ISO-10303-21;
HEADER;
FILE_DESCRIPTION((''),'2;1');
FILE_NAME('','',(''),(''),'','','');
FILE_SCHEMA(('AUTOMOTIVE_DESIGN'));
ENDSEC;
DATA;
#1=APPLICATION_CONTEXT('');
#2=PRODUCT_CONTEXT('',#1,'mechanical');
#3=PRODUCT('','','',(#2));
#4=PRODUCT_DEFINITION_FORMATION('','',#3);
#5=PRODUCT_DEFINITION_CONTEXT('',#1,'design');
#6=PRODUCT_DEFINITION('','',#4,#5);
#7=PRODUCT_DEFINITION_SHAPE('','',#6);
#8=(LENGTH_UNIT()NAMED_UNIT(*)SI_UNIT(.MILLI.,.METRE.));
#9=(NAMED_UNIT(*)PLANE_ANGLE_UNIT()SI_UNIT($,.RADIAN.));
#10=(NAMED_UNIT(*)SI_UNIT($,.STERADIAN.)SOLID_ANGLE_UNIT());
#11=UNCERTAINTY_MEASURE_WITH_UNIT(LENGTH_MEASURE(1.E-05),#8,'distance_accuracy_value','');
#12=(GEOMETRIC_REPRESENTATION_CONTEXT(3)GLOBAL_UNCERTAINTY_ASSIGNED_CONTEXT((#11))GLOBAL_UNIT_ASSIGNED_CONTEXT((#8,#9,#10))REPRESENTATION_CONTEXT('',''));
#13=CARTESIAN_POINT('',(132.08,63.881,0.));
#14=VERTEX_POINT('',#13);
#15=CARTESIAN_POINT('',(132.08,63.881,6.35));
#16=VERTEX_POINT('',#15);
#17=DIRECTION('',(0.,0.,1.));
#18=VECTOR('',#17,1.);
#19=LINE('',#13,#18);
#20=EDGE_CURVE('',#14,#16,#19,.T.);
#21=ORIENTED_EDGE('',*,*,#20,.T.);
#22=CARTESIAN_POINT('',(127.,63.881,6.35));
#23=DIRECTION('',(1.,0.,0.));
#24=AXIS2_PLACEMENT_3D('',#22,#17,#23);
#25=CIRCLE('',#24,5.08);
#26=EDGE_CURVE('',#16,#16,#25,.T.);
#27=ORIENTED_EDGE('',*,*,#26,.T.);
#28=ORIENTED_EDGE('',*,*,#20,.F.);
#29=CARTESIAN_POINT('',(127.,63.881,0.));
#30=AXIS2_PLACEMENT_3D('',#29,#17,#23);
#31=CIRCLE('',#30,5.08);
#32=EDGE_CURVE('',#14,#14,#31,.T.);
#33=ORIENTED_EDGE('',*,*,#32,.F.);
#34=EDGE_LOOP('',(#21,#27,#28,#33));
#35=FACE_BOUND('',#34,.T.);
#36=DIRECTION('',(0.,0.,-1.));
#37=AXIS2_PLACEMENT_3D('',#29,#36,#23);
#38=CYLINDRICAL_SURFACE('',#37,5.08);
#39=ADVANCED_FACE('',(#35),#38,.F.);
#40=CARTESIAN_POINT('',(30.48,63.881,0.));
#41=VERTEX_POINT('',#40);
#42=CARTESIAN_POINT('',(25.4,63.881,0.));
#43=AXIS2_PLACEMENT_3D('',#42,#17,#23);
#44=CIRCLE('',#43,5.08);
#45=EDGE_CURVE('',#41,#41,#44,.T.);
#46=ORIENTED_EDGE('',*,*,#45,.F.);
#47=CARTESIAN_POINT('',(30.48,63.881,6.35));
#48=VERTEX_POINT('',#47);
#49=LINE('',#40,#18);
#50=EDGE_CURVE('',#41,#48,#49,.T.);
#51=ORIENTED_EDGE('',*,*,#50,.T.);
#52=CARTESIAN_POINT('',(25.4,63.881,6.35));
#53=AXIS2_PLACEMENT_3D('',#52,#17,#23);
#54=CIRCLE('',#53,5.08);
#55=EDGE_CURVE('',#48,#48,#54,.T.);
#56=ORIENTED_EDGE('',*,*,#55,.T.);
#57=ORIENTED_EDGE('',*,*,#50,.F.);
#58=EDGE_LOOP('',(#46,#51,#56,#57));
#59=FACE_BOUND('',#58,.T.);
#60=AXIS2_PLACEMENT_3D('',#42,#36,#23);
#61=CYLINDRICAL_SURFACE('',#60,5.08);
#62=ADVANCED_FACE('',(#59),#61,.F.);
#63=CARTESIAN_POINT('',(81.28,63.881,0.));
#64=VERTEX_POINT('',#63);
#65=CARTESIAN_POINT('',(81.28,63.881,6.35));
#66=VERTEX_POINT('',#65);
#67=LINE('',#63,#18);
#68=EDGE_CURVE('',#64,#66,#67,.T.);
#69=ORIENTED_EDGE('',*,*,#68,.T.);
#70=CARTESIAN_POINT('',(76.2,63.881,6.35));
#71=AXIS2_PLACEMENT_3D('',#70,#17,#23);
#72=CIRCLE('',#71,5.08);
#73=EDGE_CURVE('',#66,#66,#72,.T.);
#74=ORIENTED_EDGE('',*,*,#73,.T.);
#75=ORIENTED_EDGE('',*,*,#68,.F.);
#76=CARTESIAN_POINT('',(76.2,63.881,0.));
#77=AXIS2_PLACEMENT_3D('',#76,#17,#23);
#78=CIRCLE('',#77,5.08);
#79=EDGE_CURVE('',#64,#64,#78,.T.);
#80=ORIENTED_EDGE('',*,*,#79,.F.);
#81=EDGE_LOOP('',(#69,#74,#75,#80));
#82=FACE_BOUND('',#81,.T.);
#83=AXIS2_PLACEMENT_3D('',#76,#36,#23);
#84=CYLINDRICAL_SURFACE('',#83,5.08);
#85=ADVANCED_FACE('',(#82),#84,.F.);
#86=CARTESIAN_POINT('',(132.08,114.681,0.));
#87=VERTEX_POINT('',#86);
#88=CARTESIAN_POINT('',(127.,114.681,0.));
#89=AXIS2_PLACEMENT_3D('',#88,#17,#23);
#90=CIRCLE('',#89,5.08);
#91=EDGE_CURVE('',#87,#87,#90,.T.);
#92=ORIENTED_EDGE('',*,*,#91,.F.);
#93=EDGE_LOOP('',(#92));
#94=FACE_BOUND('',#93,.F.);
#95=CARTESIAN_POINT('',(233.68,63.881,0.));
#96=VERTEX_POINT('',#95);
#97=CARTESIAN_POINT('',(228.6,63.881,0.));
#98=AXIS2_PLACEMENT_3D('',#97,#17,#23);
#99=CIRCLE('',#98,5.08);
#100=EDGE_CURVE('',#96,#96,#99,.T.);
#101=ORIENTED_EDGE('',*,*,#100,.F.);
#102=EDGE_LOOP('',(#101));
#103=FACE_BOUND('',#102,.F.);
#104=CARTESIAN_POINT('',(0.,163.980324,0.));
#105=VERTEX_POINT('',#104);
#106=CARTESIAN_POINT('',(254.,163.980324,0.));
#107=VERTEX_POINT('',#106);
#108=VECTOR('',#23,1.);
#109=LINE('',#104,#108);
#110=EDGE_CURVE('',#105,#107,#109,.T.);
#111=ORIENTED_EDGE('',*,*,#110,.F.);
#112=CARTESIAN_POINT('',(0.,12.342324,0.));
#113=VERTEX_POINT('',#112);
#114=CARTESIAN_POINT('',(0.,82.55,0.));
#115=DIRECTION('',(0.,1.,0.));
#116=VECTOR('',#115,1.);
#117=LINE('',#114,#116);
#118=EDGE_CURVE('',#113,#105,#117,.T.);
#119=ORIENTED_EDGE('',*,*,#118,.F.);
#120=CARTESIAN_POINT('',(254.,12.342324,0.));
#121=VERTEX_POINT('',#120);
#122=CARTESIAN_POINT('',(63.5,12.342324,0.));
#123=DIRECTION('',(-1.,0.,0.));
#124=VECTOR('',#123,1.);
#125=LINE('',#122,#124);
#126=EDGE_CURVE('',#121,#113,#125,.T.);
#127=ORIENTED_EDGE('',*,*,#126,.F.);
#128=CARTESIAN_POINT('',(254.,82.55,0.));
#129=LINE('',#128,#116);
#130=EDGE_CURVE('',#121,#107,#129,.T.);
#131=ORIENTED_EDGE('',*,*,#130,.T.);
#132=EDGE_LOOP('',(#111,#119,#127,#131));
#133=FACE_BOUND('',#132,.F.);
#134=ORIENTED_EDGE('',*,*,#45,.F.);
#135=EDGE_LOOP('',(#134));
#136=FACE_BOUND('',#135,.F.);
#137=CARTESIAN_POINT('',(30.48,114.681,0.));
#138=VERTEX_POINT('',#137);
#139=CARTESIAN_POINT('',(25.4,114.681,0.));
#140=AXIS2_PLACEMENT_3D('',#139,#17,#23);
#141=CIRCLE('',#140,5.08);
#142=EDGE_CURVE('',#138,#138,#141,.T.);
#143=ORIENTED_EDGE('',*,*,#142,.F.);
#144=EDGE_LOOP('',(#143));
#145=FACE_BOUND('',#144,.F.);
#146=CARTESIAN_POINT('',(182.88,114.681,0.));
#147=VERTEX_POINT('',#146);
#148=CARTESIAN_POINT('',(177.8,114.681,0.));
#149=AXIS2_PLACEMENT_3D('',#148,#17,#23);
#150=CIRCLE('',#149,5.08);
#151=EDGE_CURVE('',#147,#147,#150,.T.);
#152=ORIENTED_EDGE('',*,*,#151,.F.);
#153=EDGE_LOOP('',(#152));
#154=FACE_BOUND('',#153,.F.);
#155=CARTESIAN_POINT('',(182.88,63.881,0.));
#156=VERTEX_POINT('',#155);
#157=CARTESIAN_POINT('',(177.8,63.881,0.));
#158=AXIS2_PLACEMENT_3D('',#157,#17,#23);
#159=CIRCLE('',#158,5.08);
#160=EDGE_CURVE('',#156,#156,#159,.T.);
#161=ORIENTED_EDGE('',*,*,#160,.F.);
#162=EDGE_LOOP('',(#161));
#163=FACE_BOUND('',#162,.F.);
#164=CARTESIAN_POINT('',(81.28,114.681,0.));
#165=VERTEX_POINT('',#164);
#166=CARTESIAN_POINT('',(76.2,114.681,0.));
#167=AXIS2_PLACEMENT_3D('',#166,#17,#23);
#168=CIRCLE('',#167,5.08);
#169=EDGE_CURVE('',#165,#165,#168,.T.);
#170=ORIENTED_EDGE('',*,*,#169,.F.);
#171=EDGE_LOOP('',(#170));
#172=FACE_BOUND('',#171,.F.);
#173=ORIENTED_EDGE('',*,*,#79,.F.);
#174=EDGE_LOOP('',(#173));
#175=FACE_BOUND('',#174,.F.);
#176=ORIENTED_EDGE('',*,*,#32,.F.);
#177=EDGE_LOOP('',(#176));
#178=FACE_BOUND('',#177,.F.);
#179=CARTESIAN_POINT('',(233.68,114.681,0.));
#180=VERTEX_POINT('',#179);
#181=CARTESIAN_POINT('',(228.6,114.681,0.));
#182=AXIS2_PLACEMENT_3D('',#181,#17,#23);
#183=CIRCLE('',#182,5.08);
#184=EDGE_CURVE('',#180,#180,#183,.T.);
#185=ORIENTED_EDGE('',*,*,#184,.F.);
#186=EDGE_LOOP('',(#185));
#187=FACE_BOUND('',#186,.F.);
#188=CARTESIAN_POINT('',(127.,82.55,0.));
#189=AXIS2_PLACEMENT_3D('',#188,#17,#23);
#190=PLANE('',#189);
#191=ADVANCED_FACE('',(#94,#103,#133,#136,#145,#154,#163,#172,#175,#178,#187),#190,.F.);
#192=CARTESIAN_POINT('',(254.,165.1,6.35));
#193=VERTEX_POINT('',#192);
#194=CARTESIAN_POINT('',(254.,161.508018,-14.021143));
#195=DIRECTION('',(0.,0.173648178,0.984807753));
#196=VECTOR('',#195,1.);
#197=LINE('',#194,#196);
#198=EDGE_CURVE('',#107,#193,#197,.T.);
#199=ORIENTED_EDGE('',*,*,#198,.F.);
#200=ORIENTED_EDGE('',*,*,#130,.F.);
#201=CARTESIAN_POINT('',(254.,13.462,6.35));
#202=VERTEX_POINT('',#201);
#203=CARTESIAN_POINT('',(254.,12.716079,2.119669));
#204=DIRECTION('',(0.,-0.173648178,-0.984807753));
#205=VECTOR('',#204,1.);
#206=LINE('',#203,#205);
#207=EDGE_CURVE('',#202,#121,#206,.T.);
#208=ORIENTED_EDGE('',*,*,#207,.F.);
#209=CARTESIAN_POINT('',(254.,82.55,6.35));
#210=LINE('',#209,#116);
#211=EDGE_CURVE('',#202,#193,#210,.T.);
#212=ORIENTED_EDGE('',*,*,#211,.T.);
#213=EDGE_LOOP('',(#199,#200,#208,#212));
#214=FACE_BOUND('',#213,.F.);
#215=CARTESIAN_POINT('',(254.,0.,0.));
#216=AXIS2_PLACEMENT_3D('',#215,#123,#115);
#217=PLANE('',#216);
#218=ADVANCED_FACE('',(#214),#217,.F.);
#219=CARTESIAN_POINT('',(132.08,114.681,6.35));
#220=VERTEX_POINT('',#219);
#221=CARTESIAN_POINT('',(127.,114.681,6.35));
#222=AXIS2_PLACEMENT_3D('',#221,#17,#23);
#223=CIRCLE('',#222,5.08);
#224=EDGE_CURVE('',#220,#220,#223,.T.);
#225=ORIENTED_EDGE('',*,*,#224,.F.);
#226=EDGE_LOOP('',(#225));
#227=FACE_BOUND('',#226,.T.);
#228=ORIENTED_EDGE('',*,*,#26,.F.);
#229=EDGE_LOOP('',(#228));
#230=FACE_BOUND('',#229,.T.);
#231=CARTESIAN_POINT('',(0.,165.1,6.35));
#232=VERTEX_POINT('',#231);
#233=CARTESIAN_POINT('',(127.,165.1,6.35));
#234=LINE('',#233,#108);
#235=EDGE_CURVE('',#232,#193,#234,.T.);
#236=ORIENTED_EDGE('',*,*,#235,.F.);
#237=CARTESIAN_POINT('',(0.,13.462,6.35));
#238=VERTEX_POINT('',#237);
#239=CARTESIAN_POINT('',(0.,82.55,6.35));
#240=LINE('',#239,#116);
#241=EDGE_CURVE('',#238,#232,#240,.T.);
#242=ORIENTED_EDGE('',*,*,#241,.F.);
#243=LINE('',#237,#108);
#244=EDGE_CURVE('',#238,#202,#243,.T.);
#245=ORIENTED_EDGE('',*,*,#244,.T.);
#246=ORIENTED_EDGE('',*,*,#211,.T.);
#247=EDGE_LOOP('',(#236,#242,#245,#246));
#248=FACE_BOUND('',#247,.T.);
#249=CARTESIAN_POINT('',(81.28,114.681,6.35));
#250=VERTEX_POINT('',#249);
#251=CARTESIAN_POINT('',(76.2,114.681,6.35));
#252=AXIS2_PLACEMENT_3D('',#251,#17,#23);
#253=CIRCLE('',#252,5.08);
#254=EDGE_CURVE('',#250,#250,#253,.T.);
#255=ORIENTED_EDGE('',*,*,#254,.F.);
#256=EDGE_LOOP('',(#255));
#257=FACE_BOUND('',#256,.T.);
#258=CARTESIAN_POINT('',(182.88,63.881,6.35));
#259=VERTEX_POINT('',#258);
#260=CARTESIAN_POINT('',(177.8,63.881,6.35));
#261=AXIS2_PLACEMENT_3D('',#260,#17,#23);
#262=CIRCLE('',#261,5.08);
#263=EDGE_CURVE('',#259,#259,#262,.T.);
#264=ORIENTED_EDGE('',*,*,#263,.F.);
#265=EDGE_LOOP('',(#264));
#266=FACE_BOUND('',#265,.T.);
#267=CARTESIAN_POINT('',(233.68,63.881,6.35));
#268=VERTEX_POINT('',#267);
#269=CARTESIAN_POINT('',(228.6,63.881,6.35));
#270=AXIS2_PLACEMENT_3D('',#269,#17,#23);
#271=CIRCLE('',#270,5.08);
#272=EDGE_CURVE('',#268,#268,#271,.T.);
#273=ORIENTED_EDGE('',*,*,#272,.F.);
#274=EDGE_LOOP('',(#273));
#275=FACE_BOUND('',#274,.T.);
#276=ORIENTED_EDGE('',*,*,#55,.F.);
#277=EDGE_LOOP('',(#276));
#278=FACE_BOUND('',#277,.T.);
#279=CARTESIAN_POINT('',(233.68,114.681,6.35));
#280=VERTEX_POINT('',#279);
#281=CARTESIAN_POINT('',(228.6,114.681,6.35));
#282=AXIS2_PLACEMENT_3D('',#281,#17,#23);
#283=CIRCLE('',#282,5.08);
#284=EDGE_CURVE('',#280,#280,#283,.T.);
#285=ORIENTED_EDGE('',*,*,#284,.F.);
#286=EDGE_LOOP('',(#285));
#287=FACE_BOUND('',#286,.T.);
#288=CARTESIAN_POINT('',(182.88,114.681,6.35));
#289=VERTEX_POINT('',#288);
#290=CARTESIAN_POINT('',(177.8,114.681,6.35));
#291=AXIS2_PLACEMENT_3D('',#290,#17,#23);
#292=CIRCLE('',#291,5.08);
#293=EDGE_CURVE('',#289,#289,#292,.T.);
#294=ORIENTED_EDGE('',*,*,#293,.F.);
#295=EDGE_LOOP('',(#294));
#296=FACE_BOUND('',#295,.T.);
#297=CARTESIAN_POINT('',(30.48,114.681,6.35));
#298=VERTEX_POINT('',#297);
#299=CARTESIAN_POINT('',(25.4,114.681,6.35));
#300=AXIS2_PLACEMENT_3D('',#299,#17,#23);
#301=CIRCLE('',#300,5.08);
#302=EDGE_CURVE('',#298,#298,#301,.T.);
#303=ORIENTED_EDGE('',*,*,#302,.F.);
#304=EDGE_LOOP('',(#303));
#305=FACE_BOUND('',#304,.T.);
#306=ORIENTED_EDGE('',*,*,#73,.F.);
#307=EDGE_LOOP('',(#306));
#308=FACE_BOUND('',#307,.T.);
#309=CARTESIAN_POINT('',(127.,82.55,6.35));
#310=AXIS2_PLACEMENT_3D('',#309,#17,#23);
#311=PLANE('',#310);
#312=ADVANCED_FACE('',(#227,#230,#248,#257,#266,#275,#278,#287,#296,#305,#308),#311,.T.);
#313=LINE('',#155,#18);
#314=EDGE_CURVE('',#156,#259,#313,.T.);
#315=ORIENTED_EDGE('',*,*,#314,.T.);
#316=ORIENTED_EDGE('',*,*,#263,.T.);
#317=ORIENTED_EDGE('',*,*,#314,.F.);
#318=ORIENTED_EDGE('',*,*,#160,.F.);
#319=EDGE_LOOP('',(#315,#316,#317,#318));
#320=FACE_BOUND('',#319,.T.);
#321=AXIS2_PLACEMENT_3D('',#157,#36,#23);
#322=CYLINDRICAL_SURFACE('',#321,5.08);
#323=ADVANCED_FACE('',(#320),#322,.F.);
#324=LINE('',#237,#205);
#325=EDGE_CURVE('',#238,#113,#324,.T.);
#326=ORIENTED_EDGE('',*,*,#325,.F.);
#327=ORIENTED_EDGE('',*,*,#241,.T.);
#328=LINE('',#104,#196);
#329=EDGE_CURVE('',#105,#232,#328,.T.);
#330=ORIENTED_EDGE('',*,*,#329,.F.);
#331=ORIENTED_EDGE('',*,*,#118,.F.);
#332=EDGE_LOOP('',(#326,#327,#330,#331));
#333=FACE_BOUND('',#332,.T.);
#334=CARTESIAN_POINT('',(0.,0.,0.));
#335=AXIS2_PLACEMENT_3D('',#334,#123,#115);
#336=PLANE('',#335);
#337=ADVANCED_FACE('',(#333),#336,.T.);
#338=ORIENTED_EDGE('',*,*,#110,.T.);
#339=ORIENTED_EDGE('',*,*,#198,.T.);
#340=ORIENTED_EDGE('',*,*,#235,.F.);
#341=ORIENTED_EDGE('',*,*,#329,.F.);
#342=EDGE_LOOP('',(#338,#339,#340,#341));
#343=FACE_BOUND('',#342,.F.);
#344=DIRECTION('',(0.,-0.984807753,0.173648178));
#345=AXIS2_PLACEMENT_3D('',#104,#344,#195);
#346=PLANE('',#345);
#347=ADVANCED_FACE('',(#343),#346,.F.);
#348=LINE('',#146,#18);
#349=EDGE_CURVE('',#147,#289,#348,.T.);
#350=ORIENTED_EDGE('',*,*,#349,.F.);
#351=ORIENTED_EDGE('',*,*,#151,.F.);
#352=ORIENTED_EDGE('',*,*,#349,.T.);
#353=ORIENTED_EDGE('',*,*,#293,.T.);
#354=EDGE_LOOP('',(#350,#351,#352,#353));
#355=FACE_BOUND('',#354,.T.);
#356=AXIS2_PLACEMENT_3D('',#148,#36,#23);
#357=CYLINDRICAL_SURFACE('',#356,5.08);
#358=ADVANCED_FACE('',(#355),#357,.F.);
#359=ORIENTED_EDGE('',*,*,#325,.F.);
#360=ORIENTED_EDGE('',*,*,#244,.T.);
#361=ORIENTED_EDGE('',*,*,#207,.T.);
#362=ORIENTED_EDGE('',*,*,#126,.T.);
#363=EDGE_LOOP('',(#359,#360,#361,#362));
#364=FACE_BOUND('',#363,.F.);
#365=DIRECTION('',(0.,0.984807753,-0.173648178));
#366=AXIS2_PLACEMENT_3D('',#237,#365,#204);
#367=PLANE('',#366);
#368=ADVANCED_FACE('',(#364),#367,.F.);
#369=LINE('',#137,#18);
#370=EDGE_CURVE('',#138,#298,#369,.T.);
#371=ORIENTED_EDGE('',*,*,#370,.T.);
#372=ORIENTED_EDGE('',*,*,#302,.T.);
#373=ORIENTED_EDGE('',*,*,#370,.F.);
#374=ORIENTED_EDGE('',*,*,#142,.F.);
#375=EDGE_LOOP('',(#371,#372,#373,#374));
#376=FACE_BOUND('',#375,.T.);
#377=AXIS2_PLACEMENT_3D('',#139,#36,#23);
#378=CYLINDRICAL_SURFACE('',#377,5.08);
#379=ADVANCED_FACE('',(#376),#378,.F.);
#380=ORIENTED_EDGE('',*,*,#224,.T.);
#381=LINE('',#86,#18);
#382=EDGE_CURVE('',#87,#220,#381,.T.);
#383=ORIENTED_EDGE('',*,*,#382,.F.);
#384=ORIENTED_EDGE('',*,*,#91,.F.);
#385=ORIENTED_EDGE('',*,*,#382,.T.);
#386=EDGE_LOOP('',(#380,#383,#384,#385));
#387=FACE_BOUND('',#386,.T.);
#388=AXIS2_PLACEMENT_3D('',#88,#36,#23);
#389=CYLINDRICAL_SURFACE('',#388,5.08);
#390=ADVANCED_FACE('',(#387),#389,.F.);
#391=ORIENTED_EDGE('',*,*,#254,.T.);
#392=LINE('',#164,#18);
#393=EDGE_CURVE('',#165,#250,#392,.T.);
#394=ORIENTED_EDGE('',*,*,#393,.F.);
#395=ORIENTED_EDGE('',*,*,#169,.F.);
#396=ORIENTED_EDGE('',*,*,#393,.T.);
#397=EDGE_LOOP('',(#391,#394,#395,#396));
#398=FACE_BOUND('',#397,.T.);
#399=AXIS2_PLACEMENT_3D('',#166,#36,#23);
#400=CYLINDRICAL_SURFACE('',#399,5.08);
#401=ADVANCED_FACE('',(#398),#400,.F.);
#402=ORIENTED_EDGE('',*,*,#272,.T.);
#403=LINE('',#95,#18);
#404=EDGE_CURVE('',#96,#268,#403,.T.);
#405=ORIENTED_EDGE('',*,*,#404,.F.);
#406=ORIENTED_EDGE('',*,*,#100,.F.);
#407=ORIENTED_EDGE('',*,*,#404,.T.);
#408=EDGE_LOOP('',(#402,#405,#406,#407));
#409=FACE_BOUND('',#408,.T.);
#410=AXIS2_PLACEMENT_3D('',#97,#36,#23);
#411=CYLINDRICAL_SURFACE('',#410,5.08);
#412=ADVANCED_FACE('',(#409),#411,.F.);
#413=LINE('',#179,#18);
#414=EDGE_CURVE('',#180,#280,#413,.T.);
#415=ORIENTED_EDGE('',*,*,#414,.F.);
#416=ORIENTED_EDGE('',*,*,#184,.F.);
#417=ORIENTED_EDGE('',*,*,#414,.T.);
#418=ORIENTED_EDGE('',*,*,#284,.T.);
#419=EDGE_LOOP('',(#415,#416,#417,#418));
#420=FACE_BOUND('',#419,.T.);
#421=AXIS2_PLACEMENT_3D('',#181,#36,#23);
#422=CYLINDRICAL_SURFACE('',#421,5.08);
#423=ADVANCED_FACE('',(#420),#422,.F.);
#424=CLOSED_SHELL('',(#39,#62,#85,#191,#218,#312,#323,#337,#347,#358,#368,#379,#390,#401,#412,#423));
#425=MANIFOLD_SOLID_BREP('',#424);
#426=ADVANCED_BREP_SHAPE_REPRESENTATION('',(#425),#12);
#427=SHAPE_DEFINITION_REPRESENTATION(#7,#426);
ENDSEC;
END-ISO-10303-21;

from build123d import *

# Parameters (mm, degrees)
F0_W     = 254
F0_H     = 165.1
F0_R     = 5.08
F1_DEPTH = 6.35
F3_DEPTH = 254.001
F5_DEPTH = 254.001


with BuildPart() as f1:
    # F0 (on Top) → F1 (new body)
    with BuildSketch(Plane.XY):
        with Locations((127, 82.55)):
            Rectangle(F0_W, F0_H)
        with Locations((25.4, 63.881)):
            Circle(F0_R, mode=Mode.SUBTRACT)
        with Locations((76.2, 63.881)):
            Circle(F0_R, mode=Mode.SUBTRACT)
        with Locations((127, 63.881)):
            Circle(F0_R, mode=Mode.SUBTRACT)
        with Locations((177.8, 63.881)):
            Circle(F0_R, mode=Mode.SUBTRACT)
        with Locations((228.6, 63.881)):
            Circle(F0_R, mode=Mode.SUBTRACT)
        with Locations((25.4, 114.681)):
            Circle(F0_R, mode=Mode.SUBTRACT)
        with Locations((76.2, 114.681)):
            Circle(F0_R, mode=Mode.SUBTRACT)
        with Locations((127, 114.681)):
            Circle(F0_R, mode=Mode.SUBTRACT)
        with Locations((177.8, 114.681)):
            Circle(F0_R, mode=Mode.SUBTRACT)
        with Locations((228.6, 114.681)):
            Circle(F0_R, mode=Mode.SUBTRACT)
    extrude(amount=F1_DEPTH)

    # F2 (on face) → F3 (cut, through all)
    with BuildSketch(Plane(origin=(0, 0, 0), x_dir=(0, -1, 0), z_dir=(-1, 0, 0))):
        Polygon((-163.9803236725, 0), (-165.1, 6.35), (-165.1, 0), align=None)
    extrude(amount=-F3_DEPTH, mode=Mode.SUBTRACT)

    # F4 (on face) → F5 (cut, through all)
    with BuildSketch(Plane(origin=(0, 0, 0), x_dir=(0, -1, 0), z_dir=(-1, 0, 0))):
        Polygon((0, 6.35), (-13.462, 6.35), (-12.3423236725, 0), (0, 0), align=None)
        Polygon((0, 0), (-12.3423236725, 0), (19.5333006358, -180.7756486286), (19.5333006358, 6.35), (0, 6.35), align=None)
    extrude(amount=-F5_DEPTH, mode=Mode.SUBTRACT)


solid = f1.part
